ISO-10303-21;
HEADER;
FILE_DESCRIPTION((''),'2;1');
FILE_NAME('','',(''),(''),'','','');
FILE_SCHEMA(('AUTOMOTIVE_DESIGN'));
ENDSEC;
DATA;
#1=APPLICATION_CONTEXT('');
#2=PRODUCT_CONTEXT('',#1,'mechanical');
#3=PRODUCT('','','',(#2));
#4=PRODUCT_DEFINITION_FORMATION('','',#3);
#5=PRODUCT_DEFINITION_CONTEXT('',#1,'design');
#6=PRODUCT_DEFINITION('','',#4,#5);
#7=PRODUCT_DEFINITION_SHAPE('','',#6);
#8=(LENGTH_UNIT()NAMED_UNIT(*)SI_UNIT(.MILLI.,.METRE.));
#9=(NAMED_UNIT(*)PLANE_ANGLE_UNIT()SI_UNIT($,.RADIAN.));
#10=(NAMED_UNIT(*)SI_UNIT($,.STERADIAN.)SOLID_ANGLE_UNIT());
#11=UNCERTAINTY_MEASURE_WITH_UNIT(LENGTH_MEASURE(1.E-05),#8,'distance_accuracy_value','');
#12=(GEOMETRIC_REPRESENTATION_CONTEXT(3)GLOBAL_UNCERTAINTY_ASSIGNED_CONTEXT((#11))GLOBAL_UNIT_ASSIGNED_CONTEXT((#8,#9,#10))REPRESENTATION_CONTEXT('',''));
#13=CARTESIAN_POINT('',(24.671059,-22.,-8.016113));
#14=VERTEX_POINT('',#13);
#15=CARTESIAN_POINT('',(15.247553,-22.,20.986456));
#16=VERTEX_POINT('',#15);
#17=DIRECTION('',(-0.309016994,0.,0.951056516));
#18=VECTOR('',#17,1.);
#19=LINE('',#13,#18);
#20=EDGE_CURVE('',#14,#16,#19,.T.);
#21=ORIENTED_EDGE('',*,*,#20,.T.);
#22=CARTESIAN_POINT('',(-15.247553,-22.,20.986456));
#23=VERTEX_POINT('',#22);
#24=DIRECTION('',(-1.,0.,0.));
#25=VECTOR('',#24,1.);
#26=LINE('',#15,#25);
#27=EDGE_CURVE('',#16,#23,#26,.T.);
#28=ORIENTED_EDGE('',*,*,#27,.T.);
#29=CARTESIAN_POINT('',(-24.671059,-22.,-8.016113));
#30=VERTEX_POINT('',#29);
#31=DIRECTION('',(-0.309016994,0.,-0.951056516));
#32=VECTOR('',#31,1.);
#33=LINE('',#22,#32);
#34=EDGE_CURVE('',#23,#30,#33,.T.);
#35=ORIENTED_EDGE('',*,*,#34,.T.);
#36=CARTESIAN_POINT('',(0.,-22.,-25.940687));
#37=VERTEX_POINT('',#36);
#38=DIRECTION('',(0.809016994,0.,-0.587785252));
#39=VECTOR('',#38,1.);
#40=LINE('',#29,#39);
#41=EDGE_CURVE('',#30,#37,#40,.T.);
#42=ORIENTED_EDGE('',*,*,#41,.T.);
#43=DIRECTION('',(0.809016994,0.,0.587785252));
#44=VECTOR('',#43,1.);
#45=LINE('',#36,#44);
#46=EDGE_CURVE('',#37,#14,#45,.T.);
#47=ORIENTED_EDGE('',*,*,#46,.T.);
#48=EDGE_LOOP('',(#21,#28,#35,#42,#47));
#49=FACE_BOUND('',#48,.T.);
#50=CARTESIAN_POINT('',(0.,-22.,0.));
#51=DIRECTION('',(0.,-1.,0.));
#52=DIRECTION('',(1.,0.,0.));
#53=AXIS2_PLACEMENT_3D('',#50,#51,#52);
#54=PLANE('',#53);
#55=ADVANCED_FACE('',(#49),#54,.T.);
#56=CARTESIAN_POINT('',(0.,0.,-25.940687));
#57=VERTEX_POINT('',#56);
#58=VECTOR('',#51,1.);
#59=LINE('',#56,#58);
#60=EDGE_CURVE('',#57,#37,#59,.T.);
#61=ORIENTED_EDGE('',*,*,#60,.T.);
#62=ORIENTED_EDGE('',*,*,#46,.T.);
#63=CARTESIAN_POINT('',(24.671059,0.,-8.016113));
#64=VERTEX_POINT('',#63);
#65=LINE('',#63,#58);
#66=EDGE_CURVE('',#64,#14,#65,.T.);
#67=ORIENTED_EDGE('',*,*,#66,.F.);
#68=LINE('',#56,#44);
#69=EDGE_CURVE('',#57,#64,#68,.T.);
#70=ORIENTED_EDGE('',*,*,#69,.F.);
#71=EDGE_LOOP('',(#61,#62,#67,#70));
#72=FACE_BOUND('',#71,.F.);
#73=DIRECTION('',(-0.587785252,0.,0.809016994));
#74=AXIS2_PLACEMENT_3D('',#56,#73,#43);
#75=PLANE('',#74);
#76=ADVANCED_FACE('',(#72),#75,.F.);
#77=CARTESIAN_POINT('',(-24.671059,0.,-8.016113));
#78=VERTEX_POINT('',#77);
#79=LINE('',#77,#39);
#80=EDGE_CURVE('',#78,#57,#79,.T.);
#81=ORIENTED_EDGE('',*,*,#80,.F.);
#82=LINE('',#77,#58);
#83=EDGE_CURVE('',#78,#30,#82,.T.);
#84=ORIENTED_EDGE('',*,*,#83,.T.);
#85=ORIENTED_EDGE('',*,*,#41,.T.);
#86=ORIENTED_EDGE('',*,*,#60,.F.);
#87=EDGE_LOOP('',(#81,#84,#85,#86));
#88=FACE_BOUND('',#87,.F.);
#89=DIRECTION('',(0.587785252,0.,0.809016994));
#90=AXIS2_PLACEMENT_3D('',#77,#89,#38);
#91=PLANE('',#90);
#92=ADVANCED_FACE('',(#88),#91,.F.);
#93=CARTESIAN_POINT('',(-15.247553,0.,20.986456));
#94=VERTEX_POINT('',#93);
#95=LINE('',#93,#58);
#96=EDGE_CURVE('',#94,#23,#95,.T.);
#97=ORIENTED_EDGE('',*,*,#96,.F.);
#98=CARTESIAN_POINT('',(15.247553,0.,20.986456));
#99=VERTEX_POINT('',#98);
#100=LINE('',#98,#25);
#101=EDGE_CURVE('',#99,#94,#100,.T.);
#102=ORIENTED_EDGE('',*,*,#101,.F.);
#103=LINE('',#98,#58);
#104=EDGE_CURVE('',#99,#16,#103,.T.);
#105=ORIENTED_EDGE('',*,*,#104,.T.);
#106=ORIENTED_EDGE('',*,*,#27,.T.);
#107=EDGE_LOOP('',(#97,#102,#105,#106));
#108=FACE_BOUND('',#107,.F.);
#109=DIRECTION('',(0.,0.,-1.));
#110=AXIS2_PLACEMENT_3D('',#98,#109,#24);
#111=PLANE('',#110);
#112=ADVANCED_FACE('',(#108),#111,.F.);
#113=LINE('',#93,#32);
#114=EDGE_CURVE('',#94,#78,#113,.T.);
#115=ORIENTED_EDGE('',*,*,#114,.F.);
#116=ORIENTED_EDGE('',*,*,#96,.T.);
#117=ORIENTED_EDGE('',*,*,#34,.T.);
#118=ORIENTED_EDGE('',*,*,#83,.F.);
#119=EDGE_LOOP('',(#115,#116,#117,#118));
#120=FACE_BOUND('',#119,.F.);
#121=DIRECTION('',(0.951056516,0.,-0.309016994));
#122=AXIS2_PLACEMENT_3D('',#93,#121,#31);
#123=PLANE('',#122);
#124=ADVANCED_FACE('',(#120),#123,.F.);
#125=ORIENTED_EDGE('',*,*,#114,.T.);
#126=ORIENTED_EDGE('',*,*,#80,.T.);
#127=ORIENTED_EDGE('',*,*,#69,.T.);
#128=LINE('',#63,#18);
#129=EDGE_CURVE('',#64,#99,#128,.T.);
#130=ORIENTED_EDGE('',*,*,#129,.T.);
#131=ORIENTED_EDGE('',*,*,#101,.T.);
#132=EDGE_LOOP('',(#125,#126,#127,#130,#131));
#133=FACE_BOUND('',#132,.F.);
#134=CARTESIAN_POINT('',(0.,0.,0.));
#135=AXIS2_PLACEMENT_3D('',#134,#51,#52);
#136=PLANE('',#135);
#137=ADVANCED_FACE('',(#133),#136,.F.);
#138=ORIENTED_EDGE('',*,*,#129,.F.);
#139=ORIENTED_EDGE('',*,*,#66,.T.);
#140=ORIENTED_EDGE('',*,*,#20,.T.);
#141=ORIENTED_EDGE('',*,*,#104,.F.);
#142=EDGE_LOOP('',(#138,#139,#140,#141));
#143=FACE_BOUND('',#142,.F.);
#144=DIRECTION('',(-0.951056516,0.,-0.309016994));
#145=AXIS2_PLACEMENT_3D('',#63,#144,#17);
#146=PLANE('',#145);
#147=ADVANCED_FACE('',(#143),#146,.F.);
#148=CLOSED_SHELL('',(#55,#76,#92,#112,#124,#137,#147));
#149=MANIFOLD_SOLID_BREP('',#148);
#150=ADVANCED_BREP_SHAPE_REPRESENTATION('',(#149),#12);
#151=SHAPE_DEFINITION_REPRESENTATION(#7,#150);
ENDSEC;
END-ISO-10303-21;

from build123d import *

# Parameters (mm, degrees)
F1_DEPTH = 22


# Not quite as in the source:
# - a feature of the source that left no trace in its solid (it failed there, or was rolled back) is left out


with BuildPart() as f1:
    # F0 (on Front) → F1 (new body)
    with BuildSketch(Plane.XZ):
        Polygon((15.2475531042, 20.986456424), (-15.2475531042, 20.986456424), (-24.6710591678, -8.0161130505), (0, -25.9406867469), (24.6710591678, -8.0161130505), align=None)
    extrude(amount=F1_DEPTH)


solid = f1.part
